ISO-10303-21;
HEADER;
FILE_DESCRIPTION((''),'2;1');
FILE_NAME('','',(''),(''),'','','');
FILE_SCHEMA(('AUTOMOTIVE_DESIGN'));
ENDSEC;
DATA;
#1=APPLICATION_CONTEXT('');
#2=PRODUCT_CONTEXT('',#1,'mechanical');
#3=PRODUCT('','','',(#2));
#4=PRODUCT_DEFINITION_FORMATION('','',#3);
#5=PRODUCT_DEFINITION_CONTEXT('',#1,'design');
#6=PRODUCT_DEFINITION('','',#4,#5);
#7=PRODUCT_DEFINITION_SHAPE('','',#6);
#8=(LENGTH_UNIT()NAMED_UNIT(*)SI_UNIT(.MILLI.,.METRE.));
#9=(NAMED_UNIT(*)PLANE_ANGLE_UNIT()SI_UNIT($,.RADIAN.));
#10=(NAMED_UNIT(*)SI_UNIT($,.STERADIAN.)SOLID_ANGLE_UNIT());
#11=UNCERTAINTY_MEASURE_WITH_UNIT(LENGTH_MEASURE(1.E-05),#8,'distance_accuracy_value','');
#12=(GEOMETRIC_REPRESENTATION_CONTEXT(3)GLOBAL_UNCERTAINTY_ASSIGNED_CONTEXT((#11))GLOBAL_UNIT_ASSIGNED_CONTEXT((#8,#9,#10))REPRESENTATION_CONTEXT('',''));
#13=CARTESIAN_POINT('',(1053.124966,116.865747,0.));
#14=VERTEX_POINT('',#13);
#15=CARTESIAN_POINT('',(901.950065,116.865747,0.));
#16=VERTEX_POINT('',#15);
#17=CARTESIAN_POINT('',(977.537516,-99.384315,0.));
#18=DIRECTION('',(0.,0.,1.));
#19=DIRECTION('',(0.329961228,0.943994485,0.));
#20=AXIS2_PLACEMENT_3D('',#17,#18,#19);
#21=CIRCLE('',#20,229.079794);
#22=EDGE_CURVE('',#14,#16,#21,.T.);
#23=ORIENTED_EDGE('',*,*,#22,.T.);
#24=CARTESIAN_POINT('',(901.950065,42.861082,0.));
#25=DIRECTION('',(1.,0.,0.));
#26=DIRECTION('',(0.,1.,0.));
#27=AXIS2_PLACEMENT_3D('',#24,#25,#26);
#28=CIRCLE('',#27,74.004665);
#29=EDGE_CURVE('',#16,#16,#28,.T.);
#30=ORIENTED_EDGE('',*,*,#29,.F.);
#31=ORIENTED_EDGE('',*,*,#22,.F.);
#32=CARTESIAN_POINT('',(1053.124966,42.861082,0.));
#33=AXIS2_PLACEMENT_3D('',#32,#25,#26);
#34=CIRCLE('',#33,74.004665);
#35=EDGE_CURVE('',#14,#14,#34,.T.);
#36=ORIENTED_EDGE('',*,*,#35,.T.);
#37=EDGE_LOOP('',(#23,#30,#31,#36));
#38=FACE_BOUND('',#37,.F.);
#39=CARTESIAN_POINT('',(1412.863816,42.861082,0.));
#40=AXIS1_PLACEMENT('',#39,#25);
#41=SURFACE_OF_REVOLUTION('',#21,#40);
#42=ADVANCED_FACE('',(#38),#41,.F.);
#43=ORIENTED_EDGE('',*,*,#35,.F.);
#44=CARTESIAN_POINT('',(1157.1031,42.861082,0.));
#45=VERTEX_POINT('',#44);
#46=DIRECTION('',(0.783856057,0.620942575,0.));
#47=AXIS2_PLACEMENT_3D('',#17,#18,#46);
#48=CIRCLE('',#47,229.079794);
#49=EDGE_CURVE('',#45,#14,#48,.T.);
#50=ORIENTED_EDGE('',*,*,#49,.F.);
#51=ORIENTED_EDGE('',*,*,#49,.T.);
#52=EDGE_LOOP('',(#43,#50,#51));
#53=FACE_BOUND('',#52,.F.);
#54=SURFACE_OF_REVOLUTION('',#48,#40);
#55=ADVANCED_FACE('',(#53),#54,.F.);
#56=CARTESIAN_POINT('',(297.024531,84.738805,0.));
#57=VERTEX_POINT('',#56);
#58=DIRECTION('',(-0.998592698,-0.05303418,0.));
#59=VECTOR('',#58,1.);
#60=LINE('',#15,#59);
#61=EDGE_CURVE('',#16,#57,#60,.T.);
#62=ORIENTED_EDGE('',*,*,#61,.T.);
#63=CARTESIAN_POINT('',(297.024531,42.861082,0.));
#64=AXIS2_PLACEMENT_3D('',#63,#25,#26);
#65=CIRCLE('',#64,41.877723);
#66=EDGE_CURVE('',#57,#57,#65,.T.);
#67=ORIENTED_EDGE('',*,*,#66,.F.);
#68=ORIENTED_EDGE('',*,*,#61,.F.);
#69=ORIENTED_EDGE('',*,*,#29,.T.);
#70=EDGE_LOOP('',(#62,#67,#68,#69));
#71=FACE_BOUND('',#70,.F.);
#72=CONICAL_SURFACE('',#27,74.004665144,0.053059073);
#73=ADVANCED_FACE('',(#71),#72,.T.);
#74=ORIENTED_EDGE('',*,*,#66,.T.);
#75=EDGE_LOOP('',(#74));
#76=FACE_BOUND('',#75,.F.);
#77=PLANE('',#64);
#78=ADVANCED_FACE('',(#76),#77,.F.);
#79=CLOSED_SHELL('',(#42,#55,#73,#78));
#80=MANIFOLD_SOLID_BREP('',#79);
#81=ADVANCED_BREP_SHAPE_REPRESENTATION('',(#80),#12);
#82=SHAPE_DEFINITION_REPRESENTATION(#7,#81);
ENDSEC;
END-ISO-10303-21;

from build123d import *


# Not quite as in the source:
# - a feature names something its author has since deleted; it is built from what else it names


with BuildPart() as f1:
    # F0 (on Top) → F1 (revolve)
    with BuildSketch(Plane.XY):
        with BuildLine():
            ThreePointArc((901.9500651693, 116.8657471522), (844.7032563472, 87.2506539829), (797.971931054, 42.8610820084))
            Line((797.971931054, 42.8610820084), (1157.1030999516, 42.8610820084))
            ThreePointArc((1157.1030999516, 42.8610820084), (1110.3717746584, 87.2506539829), (1053.1249658363, 116.8657471522))
            ThreePointArc((1053.1249658363, 116.8657471522), (977.5375155028, 129.6954789984), (901.9500651693, 116.8657471522))
        make_face()
        with BuildLine():
            Line((297.0245311433, 84.7388050565), (297.0245311433, 42.8610820084))
            Line((297.0245311433, 42.8610820084), (797.971931054, 42.8610820084))
            ThreePointArc((797.971931054, 42.8610820084), (844.7032563472, 87.2506539829), (901.9500651693, 116.8657471522))
            Line((901.9500651693, 116.8657471522), (297.0245311433, 84.7388050565))
        make_face()
    revolve(axis=Axis((1412.8638155475, 42.8610820084, 0), (1, 0, 0)))


solid = f1.part
